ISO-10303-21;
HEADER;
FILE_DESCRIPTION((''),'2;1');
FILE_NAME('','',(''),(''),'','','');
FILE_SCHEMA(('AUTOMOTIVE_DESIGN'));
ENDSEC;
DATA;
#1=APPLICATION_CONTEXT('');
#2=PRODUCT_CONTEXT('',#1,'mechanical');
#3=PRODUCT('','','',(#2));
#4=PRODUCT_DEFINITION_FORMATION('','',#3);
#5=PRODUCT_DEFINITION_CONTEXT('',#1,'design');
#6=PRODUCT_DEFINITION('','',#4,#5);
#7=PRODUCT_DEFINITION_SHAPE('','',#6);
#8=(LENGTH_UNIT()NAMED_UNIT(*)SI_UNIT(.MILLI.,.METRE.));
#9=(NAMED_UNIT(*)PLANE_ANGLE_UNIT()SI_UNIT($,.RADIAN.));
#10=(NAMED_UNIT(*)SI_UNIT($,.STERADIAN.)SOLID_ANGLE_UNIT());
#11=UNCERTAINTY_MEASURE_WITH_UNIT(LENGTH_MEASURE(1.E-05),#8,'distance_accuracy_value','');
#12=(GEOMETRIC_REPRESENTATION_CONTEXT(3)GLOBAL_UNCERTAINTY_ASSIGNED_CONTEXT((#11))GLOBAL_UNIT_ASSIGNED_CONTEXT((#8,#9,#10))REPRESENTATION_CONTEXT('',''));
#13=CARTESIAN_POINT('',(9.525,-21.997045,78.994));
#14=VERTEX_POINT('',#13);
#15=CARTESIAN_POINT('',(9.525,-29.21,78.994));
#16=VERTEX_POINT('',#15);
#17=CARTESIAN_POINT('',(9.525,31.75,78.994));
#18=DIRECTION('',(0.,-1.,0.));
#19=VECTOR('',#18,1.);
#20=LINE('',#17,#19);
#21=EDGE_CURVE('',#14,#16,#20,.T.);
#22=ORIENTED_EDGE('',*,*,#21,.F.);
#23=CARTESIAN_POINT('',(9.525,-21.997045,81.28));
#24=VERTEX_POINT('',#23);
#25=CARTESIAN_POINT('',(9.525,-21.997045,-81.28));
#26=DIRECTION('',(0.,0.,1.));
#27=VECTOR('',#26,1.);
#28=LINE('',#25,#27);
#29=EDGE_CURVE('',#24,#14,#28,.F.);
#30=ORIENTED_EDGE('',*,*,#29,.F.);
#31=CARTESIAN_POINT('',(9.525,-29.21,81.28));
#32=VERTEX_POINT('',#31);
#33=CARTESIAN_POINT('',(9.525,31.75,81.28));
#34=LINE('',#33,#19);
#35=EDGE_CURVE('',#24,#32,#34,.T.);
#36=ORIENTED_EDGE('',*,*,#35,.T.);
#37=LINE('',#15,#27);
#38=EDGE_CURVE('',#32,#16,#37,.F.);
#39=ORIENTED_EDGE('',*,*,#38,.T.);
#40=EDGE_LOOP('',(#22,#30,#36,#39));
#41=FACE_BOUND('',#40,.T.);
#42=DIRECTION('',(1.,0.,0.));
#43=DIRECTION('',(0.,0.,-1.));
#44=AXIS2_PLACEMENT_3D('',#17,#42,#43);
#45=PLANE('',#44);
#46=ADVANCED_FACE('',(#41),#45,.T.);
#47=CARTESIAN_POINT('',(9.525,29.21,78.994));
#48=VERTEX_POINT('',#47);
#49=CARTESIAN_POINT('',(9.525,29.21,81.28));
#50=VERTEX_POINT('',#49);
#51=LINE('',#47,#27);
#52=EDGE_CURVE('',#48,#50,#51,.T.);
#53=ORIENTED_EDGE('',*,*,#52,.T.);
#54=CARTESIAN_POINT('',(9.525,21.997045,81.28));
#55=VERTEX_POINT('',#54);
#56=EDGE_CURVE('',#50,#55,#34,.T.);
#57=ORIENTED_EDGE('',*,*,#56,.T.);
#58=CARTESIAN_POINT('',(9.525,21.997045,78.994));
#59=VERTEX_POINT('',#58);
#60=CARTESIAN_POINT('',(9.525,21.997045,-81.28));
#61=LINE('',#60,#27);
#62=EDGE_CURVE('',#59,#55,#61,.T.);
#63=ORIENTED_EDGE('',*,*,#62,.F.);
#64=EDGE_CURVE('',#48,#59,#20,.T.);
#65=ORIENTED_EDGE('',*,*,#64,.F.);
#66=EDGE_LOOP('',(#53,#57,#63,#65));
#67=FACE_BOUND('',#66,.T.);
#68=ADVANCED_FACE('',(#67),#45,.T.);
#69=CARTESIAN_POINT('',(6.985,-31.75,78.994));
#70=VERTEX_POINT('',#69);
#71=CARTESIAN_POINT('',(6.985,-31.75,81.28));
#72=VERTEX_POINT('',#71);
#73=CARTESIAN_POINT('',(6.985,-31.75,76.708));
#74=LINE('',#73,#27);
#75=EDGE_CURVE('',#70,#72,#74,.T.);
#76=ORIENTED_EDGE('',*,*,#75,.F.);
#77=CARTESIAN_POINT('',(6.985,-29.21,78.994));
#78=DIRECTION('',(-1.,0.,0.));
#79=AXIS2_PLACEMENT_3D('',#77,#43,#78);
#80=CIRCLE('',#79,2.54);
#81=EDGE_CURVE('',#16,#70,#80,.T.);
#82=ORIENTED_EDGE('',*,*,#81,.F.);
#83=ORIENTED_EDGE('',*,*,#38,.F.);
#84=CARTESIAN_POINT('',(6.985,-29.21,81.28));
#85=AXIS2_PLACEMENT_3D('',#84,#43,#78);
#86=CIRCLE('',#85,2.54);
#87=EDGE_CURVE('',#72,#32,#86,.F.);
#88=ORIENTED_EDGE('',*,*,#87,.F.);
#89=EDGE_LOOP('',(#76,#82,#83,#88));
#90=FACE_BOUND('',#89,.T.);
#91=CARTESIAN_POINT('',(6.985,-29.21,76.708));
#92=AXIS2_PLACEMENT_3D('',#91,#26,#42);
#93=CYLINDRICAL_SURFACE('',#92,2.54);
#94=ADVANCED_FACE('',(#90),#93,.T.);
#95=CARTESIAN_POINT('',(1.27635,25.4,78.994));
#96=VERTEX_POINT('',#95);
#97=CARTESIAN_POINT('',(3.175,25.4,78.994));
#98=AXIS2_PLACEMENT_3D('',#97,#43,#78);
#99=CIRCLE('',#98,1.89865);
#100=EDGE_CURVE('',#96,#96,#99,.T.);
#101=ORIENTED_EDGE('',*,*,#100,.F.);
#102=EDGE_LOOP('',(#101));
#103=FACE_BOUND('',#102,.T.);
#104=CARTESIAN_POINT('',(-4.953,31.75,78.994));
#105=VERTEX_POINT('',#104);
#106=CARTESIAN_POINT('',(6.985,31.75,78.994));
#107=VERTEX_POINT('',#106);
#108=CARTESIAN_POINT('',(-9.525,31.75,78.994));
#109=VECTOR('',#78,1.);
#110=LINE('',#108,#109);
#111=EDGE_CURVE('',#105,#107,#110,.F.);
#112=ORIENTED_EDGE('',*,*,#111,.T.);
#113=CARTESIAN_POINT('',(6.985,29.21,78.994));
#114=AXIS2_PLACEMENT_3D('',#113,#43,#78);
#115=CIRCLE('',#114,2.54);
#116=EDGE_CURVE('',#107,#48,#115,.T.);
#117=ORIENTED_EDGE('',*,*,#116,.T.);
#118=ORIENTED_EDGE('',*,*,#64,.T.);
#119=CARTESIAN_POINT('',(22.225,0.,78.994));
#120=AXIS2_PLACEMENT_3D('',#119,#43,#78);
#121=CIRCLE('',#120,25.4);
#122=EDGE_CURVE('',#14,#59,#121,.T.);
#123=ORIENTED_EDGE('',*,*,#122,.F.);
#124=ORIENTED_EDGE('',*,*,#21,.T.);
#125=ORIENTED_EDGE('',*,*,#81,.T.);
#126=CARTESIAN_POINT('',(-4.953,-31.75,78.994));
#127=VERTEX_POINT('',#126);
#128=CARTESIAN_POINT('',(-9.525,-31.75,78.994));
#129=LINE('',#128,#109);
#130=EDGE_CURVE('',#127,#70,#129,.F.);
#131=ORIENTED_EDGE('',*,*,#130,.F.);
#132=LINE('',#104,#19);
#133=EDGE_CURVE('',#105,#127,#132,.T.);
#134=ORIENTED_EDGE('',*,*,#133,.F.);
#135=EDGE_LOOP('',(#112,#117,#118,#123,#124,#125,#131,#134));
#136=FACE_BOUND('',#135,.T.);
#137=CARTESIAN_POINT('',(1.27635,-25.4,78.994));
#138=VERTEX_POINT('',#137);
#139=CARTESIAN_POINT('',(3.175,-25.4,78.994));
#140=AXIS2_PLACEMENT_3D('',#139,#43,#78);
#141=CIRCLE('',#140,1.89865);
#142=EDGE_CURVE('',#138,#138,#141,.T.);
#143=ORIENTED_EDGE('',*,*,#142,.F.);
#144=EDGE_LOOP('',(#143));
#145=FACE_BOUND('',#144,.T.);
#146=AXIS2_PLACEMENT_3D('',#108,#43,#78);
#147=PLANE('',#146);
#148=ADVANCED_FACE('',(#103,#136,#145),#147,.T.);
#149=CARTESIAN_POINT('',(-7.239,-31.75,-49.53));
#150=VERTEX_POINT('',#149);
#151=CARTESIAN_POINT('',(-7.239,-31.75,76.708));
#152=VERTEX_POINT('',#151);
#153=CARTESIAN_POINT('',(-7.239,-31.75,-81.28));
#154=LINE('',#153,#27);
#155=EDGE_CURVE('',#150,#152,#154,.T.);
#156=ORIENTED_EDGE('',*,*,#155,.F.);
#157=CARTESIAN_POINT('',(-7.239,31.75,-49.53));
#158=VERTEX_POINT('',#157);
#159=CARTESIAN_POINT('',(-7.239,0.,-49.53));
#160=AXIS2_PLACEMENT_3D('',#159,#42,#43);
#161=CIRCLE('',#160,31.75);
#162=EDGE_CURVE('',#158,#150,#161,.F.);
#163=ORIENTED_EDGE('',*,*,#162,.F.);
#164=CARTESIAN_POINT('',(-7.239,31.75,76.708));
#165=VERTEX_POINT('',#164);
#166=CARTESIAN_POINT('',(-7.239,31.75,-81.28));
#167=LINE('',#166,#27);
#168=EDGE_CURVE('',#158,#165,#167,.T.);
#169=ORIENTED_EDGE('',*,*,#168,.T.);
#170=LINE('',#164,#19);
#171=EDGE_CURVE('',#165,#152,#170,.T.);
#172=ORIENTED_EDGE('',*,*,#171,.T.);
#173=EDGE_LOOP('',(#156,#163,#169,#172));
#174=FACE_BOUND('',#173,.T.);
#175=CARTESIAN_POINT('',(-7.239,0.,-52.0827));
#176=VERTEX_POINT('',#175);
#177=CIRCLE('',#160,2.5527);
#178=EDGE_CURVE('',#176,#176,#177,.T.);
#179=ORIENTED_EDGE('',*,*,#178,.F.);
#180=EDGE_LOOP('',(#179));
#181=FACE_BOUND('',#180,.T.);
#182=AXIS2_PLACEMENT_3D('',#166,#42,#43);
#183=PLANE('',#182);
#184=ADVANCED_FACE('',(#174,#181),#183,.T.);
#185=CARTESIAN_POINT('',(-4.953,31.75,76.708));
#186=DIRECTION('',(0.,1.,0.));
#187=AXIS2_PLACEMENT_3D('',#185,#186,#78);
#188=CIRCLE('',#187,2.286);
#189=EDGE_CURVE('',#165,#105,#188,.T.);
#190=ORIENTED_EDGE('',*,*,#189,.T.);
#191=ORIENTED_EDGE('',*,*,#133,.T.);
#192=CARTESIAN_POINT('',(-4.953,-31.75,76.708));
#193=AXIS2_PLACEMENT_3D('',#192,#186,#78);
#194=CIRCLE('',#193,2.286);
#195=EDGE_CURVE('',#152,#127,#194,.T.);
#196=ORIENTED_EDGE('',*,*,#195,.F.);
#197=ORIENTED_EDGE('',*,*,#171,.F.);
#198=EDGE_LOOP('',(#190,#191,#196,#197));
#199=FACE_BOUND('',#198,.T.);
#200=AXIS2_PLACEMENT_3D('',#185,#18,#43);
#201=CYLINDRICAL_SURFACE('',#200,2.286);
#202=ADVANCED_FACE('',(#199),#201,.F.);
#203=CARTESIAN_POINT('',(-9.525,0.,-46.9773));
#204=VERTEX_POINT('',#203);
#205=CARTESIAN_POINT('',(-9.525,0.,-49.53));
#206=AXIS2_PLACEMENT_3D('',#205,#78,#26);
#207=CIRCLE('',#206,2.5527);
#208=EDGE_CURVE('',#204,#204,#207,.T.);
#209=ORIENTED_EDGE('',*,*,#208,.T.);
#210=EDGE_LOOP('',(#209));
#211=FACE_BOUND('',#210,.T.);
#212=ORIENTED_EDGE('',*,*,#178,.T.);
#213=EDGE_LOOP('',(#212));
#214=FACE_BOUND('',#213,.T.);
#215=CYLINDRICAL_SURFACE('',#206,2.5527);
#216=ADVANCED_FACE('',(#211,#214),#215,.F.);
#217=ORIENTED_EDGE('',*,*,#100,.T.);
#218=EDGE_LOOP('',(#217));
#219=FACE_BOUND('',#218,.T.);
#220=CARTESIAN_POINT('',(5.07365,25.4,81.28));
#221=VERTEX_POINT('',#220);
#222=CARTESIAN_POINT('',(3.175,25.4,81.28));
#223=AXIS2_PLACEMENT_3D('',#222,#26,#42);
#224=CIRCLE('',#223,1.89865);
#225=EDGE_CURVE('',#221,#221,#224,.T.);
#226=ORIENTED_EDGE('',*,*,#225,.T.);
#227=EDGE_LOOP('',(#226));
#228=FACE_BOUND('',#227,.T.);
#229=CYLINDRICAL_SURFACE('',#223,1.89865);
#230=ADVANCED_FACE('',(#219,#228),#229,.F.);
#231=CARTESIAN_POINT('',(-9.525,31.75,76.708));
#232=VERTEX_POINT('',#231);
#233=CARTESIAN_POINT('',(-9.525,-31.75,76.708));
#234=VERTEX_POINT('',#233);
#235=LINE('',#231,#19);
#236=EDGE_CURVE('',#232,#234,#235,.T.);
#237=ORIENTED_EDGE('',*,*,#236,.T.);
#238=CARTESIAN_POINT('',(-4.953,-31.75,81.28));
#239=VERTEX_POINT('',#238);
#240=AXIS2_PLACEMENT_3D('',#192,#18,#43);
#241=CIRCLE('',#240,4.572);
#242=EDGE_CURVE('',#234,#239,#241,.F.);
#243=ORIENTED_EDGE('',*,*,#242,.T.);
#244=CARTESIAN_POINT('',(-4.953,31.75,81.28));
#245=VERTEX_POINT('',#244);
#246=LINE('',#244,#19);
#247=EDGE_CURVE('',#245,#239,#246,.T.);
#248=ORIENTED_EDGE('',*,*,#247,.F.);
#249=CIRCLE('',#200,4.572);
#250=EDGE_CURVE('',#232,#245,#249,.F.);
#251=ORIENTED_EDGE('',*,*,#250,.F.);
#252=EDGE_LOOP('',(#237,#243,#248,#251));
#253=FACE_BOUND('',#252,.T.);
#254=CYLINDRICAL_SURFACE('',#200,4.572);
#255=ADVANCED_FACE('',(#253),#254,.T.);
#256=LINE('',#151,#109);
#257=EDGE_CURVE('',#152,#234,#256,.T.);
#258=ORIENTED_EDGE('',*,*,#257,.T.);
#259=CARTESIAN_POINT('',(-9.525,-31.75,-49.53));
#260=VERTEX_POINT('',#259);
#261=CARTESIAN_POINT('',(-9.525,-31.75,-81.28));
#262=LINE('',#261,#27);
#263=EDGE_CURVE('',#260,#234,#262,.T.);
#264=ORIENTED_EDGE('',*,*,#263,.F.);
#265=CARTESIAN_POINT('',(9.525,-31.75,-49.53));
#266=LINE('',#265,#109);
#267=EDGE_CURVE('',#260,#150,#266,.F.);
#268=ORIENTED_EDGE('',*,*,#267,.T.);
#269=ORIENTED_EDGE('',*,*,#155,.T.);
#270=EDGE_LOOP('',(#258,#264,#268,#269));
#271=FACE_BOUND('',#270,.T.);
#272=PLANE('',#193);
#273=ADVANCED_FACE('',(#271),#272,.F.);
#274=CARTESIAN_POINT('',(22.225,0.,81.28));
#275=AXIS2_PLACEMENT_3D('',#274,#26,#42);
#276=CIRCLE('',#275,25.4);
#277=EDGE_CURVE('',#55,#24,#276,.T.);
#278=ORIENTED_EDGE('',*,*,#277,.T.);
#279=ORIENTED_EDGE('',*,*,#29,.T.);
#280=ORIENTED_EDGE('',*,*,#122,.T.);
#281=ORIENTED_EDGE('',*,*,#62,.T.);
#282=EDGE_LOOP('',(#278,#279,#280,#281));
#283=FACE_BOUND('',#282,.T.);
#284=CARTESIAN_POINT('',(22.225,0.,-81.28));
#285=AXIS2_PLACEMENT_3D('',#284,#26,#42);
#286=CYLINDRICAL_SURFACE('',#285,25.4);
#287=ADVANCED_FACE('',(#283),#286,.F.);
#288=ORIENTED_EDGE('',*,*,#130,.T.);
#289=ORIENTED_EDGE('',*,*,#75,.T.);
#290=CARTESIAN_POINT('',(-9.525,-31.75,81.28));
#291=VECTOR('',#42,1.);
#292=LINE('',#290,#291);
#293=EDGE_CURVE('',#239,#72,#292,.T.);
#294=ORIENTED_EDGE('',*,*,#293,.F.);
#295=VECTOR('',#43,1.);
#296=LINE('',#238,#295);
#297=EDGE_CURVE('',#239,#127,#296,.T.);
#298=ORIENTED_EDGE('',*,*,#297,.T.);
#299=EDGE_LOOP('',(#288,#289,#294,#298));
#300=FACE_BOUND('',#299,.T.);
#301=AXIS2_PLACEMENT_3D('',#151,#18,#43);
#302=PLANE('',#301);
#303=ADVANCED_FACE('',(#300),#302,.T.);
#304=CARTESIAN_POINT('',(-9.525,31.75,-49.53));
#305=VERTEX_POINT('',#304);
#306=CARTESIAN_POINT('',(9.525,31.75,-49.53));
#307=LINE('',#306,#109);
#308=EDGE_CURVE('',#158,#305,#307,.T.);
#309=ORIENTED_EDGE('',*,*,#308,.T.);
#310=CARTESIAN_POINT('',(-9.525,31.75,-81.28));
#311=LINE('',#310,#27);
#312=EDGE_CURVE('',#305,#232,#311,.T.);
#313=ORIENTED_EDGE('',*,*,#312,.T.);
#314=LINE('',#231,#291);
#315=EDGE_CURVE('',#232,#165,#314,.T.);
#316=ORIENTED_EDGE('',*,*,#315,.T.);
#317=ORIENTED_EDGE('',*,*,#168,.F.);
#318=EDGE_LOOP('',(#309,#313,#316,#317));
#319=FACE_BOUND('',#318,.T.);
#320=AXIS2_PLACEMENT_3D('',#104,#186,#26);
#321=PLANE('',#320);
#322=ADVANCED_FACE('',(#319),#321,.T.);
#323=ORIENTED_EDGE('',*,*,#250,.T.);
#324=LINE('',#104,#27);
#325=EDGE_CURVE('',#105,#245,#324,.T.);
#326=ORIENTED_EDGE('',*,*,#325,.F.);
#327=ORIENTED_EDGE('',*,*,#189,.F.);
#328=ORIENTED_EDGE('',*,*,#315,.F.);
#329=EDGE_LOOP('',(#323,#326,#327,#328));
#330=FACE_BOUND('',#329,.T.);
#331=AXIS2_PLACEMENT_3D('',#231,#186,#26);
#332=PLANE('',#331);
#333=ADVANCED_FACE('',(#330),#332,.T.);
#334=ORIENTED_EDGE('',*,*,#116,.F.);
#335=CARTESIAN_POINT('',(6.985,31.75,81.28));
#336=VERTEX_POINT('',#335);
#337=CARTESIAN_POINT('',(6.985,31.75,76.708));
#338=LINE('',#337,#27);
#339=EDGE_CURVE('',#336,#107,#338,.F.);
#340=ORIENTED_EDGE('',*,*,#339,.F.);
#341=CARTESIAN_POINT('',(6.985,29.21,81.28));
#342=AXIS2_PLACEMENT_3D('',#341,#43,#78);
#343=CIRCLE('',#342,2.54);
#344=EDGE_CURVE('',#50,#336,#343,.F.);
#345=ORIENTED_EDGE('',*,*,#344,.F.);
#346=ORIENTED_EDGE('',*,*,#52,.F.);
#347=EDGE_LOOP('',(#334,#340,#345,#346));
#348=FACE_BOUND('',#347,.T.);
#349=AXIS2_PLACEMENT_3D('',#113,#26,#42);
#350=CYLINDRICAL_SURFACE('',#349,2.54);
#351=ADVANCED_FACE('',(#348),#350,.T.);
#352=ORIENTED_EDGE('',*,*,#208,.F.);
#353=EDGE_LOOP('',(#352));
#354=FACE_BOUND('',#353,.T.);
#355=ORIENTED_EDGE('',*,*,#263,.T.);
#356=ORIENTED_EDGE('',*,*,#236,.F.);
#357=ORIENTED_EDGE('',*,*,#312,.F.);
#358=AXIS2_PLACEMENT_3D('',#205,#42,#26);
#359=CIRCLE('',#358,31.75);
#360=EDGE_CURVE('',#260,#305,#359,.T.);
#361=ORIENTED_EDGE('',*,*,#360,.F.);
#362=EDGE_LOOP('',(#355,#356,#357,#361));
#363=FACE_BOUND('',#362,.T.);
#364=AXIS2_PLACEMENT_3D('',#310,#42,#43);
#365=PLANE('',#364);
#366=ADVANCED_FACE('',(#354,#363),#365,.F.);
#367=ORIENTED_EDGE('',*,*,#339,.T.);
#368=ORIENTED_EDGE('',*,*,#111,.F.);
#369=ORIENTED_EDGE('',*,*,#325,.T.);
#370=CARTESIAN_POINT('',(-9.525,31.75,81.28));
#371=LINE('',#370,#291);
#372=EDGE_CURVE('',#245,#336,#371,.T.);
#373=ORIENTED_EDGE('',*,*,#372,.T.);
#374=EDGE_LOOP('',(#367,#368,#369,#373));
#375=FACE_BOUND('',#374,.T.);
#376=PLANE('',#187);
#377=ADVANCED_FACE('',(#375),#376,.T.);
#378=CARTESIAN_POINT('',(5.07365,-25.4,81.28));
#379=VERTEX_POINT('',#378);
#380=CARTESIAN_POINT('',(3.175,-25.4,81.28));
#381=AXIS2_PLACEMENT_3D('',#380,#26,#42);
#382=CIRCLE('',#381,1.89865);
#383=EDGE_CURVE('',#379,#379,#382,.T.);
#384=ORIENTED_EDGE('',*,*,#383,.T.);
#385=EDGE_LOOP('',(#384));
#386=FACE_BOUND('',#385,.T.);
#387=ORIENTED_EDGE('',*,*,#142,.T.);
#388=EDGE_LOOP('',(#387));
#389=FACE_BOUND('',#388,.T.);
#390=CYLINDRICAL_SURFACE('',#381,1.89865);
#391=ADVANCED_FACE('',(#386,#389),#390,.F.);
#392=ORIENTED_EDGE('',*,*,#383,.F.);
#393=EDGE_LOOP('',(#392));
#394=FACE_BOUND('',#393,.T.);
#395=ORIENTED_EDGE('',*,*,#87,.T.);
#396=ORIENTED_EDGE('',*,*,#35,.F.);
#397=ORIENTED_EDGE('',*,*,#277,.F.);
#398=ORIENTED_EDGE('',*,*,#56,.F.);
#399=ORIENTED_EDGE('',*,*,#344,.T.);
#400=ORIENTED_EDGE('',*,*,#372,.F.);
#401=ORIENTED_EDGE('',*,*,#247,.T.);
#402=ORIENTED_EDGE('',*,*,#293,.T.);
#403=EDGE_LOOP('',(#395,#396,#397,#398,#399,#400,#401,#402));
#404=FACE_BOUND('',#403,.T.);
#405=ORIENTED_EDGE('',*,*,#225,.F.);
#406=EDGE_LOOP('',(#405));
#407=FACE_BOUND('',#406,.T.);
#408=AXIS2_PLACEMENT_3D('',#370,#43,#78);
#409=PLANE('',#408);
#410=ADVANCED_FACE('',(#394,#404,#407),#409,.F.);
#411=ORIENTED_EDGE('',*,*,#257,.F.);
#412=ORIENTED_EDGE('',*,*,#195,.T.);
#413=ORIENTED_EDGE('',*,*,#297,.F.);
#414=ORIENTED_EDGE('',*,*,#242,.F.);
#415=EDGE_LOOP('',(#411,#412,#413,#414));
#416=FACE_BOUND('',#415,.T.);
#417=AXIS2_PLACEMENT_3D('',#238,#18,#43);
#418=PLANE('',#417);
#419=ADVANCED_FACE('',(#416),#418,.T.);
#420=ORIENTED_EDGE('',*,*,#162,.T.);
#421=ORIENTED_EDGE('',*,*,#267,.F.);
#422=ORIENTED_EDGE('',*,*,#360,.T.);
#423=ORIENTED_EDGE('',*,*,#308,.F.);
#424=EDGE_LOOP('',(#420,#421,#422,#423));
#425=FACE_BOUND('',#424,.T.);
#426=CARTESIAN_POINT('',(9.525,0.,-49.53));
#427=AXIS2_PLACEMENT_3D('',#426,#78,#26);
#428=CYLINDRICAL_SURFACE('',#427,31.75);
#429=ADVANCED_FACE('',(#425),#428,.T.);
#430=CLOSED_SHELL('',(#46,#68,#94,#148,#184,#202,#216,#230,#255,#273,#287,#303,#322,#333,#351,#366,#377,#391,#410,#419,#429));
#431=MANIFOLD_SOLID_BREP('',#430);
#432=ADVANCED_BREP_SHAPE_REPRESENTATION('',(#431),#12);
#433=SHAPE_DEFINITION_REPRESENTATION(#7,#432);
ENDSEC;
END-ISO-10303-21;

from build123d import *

# Parameters (mm, degrees)
BASE_FLANGE1_DEPTH           = 31.75
SKETCH6_R                    = 25.4
CUT_EXTRUDE1_DEPTH           = 166.905219101
FILLET1_R                    = 2.54
CUT_EXTRUDE2_DEPTH           = 90.31631094
F_7_0_201_DIAMETER_HOLE1_D   = 5.1054
F_25_0_1495_DIAMETER_HOLE1_D = 3.7973


# Sheet-metal steps are written as plain solids
with BuildPart() as part:
    # Sketch1 → Base-Flange1 (new, symmetric)
    with BuildSketch(Plane(origin=(0, 0, 0), x_dir=(-1, 0, 0), z_dir=(0, 1, 0))):
        with BuildLine():
            Line((9.525, -81.28), (9.525, 76.708))
            ThreePointArc((9.525, 76.708), (8.185892204, 79.940892204), (4.953, 81.28))
            Line((4.953, 81.28), (-9.525, 81.28))
            Line((-9.525, 81.28), (-9.525, 78.994))
            Line((-9.525, 78.994), (4.953, 78.994))
            ThreePointArc((4.953, 78.994), (6.569446102, 78.324446102), (7.239, 76.708))
            Line((7.239, 76.708), (7.239, -81.28))
            Line((7.239, -81.28), (9.525, -81.28))
        make_face()
    extrude(amount=BASE_FLANGE1_DEPTH, both=True)

    # Sketch6 → Cut-Extrude1 (cut, through all)
    with BuildSketch(Plane.XY.offset(81.28)):
        with Locations((22.225, 0)):
            Circle(SKETCH6_R)
    extrude(amount=-CUT_EXTRUDE1_DEPTH, mode=Mode.SUBTRACT)

    # Fillet1
    fillet1_edges = [part.edges().sort_by_distance(p)[0] for p in [
        (9.525, 31.75, 80.137),
        (9.525, -31.75, 80.137),
    ]]
    fillet(fillet1_edges, radius=FILLET1_R)

    # Sketch7 → Cut-Extrude2 (cut, through all)
    with BuildSketch(Plane(origin=(-9.525, 0, 0), x_dir=(0, -1, 0), z_dir=(-1, 0, 0))):
        with BuildLine():
            Line((-31.75, -49.53), (-31.75, -100.33))
            Line((-31.75, -100.33), (31.75, -100.33))
            Line((31.75, -100.33), (31.75, -49.53))
            ThreePointArc((31.75, -49.53), (0, -81.28), (-31.75, -49.53))
        make_face()
    extrude(amount=-CUT_EXTRUDE2_DEPTH, mode=Mode.SUBTRACT)

    # #7 (0.201) Diameter Hole1 (through all)
    with Locations(Plane.ZY.offset(9.525)):
        with Locations((-49.53, 0)):
            Hole(F_7_0_201_DIAMETER_HOLE1_D / 2)

    # #25 (0.1495) Diameter Hole1 (through all)
    with Locations(Plane.XY.offset(81.28)):
        with Locations((3.175, 25.4), (3.175, -25.4)):
            Hole(F_25_0_1495_DIAMETER_HOLE1_D / 2)


solid = part.part
